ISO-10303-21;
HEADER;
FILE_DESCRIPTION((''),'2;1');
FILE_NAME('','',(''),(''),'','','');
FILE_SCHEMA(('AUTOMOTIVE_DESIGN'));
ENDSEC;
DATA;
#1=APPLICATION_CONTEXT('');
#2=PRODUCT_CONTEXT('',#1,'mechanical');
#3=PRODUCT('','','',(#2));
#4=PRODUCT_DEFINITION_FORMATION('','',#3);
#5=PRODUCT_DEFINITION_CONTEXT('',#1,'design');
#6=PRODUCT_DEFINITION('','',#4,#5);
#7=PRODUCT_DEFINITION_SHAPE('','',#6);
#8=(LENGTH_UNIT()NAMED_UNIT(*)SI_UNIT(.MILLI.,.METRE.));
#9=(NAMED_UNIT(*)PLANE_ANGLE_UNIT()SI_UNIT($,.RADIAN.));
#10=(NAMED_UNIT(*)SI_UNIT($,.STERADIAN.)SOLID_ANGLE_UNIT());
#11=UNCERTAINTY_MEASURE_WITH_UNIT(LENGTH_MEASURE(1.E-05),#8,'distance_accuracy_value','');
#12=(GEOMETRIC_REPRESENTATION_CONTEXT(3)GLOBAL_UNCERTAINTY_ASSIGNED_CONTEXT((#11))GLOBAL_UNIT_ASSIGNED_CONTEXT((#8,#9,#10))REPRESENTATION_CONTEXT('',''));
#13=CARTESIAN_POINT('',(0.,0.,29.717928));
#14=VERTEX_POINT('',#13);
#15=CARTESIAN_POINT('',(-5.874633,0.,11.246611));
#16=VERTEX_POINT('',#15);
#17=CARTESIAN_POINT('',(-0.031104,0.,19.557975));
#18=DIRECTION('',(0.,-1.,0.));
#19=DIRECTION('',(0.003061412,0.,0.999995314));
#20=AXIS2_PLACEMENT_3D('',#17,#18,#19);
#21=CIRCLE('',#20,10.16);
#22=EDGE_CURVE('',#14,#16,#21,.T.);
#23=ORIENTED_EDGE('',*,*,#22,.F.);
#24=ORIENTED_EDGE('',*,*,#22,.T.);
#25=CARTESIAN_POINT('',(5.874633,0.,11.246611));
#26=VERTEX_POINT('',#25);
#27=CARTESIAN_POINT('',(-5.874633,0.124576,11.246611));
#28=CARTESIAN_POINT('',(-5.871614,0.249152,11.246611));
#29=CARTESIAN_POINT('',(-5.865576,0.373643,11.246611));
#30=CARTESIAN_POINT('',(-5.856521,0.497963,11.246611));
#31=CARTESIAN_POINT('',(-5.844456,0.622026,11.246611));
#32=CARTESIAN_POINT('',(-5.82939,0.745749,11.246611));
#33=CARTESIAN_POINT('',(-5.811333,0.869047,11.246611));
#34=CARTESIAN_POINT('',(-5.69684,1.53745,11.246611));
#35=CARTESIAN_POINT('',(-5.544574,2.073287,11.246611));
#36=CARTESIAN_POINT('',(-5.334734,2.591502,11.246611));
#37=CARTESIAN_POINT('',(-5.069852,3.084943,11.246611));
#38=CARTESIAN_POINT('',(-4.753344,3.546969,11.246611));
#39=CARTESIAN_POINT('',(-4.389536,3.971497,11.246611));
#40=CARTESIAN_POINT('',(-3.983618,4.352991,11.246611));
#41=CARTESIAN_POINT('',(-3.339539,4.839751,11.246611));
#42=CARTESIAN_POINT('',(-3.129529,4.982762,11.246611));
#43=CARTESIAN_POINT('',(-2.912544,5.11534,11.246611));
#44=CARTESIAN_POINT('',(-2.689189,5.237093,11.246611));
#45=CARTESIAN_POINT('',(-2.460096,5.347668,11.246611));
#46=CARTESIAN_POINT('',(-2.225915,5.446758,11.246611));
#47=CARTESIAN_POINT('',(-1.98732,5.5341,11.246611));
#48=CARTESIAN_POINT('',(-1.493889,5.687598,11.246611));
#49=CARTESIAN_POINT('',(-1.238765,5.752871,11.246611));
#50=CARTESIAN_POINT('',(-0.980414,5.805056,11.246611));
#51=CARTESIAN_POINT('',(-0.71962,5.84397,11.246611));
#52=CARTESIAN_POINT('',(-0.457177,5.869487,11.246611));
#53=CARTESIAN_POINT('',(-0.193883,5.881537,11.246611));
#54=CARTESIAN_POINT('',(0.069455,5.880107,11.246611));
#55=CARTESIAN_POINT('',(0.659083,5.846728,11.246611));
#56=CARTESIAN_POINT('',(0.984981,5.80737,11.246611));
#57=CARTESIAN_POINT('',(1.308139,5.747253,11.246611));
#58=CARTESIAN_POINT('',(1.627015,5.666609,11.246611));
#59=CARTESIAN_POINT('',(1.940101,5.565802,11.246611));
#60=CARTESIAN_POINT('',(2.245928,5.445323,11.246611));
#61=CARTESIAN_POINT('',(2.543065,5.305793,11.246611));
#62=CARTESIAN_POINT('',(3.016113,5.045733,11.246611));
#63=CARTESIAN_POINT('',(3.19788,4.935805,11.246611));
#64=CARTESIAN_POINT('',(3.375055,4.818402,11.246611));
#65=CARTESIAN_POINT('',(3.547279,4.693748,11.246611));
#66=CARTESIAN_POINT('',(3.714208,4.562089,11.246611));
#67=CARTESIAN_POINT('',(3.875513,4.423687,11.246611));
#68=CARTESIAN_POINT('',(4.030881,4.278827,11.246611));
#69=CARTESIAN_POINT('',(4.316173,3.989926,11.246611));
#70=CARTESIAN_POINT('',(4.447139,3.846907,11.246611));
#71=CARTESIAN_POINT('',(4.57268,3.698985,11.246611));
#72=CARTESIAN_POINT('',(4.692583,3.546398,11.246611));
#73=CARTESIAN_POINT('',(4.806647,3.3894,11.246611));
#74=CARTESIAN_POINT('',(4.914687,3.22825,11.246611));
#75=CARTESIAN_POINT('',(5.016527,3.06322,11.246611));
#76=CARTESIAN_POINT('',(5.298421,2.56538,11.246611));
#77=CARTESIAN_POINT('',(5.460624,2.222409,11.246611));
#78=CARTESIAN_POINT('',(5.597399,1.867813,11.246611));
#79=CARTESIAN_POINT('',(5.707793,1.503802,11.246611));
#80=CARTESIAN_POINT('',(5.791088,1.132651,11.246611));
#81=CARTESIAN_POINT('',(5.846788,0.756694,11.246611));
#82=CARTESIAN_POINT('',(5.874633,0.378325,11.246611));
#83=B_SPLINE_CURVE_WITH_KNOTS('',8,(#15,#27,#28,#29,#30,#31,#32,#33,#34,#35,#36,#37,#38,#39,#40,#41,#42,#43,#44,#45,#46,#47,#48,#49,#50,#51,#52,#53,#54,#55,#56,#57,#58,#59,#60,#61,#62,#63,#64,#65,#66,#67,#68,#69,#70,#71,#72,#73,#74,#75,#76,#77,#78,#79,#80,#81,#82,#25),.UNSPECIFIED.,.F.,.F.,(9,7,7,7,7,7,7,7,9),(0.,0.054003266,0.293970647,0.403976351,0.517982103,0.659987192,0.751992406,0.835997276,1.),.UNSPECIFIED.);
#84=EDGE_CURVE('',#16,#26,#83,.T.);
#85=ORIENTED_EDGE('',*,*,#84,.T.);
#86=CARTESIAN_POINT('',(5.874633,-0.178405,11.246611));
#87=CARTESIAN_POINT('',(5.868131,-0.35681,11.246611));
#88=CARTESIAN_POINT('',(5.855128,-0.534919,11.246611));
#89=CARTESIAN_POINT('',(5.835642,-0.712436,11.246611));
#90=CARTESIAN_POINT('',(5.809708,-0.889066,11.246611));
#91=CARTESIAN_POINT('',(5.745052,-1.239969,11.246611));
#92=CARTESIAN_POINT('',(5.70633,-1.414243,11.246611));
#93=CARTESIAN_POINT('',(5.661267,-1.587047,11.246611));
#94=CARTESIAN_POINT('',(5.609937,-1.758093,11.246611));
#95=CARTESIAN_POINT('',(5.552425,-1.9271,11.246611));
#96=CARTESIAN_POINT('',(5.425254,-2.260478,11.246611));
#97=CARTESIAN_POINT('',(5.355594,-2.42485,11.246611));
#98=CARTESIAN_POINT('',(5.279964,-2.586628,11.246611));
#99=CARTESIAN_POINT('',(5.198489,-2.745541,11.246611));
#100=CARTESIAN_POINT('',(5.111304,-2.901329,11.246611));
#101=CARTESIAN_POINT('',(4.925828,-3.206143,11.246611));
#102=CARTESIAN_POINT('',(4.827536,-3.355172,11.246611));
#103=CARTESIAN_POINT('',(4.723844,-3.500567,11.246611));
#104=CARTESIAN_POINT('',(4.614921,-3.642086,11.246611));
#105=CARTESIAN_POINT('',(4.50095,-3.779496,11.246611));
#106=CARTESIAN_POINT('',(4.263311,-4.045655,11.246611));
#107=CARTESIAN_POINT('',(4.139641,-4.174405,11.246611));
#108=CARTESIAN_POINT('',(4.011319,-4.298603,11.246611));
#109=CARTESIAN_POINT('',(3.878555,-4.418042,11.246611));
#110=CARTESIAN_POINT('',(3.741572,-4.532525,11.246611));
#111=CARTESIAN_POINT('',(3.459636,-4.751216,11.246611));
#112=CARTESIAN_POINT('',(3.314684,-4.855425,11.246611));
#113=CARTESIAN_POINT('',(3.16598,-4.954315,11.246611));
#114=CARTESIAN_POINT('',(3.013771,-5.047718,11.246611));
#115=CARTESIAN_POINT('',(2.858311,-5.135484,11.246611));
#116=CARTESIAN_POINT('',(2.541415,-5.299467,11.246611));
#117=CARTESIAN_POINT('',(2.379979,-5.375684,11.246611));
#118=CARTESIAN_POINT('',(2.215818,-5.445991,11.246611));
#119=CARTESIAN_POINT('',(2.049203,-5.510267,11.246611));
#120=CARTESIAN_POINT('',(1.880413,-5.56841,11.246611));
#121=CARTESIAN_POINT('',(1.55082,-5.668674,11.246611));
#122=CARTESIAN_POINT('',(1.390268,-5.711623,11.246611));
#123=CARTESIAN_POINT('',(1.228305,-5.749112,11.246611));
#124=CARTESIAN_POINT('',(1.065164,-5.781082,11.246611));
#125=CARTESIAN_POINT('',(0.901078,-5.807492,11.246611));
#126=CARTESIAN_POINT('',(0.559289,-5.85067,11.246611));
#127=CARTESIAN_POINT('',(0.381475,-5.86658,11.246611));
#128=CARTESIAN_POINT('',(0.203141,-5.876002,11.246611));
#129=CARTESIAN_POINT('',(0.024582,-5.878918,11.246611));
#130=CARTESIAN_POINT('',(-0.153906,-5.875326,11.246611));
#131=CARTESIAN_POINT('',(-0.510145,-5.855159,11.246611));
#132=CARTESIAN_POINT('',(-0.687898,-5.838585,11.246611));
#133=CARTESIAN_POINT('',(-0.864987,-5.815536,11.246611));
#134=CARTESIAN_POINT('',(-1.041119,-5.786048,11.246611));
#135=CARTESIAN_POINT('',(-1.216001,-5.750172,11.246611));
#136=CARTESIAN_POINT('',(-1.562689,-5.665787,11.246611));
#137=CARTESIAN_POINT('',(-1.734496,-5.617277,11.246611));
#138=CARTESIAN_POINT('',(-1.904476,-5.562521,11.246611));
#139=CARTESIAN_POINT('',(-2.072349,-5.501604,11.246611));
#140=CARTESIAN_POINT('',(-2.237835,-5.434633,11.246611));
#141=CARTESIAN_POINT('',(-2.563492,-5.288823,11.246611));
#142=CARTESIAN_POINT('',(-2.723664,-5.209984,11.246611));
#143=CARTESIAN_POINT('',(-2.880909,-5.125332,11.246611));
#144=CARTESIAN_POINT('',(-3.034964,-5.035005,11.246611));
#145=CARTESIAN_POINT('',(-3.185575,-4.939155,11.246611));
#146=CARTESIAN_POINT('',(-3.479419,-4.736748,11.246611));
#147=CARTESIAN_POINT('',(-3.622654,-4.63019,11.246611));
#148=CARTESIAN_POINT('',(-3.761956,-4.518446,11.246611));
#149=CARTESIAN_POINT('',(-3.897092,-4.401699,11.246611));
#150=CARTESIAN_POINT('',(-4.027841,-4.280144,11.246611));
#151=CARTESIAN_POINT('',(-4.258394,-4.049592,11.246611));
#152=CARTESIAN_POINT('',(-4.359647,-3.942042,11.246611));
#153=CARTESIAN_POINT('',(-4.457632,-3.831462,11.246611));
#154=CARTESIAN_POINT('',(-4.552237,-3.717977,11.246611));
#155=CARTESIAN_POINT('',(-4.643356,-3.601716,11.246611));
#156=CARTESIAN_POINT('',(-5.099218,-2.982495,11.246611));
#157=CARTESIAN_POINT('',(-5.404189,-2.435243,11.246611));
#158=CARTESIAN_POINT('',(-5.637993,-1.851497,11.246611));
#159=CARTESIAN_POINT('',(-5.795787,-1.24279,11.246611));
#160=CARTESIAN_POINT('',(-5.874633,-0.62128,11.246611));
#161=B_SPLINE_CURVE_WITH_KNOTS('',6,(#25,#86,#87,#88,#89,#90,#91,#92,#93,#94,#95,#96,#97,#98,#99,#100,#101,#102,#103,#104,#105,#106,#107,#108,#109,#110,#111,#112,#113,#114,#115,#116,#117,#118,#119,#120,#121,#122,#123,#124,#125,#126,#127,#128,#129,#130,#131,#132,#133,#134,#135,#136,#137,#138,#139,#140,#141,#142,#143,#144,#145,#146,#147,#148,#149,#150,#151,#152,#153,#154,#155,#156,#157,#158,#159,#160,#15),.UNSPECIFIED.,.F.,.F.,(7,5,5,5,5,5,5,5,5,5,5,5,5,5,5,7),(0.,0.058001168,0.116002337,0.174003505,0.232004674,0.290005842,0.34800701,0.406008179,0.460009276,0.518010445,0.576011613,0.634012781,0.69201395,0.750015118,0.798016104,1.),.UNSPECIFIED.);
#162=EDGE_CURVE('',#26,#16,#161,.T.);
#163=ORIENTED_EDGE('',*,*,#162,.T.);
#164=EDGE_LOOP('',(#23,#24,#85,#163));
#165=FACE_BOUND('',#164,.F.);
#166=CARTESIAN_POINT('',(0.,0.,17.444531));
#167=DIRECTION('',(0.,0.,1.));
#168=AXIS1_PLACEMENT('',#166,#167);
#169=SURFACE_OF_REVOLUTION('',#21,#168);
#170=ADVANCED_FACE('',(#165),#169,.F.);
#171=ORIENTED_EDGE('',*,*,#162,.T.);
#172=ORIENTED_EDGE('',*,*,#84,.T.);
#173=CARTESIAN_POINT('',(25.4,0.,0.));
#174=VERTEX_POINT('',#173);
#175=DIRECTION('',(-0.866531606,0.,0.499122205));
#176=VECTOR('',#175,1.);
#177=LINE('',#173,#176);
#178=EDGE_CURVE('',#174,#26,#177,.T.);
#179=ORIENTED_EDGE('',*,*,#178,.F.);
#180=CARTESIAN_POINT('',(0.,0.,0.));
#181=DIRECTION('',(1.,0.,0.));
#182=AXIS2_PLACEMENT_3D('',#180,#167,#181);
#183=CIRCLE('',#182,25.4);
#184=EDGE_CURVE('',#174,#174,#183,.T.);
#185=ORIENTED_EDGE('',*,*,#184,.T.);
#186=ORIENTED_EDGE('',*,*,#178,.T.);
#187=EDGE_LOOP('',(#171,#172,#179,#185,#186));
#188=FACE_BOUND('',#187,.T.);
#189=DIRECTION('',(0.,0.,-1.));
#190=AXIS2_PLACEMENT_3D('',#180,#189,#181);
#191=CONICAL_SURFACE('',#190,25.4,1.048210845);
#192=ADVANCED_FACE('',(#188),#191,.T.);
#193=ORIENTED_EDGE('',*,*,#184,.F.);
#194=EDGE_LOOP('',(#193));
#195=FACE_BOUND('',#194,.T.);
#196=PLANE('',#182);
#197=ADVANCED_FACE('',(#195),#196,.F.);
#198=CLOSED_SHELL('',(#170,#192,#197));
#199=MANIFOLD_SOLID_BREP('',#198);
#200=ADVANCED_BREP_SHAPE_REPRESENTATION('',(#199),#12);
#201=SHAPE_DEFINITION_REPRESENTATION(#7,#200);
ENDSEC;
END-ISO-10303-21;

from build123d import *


# Not quite as in the source:
# - a feature names something its author has since deleted; it is built from what else it names


with BuildPart() as f1:
    # F0 (on Front) → F1 (revolve)
    with BuildSketch(Plane.XZ):
        Polygon((0, 11.43), (0, 0), (25.4, 0), (5.55625, 11.43), align=None)
    revolve(axis=Axis((0, 0, 5.715), (0, 0, 1)))

    # F2 (on Front) → F3 (revolve)
    with BuildSketch(Plane.XZ):
        with BuildLine():
            Line((0, 9.3980228781), (0, 29.7179276559))
            ThreePointArc((0, 29.7179276559), (-10.19110395, 19.557975267), (0, 9.3980228781))
        make_face()
    revolve(axis=Axis((0, 0, 17.444530502), (0, 0, 1)))


solid = f1.part
